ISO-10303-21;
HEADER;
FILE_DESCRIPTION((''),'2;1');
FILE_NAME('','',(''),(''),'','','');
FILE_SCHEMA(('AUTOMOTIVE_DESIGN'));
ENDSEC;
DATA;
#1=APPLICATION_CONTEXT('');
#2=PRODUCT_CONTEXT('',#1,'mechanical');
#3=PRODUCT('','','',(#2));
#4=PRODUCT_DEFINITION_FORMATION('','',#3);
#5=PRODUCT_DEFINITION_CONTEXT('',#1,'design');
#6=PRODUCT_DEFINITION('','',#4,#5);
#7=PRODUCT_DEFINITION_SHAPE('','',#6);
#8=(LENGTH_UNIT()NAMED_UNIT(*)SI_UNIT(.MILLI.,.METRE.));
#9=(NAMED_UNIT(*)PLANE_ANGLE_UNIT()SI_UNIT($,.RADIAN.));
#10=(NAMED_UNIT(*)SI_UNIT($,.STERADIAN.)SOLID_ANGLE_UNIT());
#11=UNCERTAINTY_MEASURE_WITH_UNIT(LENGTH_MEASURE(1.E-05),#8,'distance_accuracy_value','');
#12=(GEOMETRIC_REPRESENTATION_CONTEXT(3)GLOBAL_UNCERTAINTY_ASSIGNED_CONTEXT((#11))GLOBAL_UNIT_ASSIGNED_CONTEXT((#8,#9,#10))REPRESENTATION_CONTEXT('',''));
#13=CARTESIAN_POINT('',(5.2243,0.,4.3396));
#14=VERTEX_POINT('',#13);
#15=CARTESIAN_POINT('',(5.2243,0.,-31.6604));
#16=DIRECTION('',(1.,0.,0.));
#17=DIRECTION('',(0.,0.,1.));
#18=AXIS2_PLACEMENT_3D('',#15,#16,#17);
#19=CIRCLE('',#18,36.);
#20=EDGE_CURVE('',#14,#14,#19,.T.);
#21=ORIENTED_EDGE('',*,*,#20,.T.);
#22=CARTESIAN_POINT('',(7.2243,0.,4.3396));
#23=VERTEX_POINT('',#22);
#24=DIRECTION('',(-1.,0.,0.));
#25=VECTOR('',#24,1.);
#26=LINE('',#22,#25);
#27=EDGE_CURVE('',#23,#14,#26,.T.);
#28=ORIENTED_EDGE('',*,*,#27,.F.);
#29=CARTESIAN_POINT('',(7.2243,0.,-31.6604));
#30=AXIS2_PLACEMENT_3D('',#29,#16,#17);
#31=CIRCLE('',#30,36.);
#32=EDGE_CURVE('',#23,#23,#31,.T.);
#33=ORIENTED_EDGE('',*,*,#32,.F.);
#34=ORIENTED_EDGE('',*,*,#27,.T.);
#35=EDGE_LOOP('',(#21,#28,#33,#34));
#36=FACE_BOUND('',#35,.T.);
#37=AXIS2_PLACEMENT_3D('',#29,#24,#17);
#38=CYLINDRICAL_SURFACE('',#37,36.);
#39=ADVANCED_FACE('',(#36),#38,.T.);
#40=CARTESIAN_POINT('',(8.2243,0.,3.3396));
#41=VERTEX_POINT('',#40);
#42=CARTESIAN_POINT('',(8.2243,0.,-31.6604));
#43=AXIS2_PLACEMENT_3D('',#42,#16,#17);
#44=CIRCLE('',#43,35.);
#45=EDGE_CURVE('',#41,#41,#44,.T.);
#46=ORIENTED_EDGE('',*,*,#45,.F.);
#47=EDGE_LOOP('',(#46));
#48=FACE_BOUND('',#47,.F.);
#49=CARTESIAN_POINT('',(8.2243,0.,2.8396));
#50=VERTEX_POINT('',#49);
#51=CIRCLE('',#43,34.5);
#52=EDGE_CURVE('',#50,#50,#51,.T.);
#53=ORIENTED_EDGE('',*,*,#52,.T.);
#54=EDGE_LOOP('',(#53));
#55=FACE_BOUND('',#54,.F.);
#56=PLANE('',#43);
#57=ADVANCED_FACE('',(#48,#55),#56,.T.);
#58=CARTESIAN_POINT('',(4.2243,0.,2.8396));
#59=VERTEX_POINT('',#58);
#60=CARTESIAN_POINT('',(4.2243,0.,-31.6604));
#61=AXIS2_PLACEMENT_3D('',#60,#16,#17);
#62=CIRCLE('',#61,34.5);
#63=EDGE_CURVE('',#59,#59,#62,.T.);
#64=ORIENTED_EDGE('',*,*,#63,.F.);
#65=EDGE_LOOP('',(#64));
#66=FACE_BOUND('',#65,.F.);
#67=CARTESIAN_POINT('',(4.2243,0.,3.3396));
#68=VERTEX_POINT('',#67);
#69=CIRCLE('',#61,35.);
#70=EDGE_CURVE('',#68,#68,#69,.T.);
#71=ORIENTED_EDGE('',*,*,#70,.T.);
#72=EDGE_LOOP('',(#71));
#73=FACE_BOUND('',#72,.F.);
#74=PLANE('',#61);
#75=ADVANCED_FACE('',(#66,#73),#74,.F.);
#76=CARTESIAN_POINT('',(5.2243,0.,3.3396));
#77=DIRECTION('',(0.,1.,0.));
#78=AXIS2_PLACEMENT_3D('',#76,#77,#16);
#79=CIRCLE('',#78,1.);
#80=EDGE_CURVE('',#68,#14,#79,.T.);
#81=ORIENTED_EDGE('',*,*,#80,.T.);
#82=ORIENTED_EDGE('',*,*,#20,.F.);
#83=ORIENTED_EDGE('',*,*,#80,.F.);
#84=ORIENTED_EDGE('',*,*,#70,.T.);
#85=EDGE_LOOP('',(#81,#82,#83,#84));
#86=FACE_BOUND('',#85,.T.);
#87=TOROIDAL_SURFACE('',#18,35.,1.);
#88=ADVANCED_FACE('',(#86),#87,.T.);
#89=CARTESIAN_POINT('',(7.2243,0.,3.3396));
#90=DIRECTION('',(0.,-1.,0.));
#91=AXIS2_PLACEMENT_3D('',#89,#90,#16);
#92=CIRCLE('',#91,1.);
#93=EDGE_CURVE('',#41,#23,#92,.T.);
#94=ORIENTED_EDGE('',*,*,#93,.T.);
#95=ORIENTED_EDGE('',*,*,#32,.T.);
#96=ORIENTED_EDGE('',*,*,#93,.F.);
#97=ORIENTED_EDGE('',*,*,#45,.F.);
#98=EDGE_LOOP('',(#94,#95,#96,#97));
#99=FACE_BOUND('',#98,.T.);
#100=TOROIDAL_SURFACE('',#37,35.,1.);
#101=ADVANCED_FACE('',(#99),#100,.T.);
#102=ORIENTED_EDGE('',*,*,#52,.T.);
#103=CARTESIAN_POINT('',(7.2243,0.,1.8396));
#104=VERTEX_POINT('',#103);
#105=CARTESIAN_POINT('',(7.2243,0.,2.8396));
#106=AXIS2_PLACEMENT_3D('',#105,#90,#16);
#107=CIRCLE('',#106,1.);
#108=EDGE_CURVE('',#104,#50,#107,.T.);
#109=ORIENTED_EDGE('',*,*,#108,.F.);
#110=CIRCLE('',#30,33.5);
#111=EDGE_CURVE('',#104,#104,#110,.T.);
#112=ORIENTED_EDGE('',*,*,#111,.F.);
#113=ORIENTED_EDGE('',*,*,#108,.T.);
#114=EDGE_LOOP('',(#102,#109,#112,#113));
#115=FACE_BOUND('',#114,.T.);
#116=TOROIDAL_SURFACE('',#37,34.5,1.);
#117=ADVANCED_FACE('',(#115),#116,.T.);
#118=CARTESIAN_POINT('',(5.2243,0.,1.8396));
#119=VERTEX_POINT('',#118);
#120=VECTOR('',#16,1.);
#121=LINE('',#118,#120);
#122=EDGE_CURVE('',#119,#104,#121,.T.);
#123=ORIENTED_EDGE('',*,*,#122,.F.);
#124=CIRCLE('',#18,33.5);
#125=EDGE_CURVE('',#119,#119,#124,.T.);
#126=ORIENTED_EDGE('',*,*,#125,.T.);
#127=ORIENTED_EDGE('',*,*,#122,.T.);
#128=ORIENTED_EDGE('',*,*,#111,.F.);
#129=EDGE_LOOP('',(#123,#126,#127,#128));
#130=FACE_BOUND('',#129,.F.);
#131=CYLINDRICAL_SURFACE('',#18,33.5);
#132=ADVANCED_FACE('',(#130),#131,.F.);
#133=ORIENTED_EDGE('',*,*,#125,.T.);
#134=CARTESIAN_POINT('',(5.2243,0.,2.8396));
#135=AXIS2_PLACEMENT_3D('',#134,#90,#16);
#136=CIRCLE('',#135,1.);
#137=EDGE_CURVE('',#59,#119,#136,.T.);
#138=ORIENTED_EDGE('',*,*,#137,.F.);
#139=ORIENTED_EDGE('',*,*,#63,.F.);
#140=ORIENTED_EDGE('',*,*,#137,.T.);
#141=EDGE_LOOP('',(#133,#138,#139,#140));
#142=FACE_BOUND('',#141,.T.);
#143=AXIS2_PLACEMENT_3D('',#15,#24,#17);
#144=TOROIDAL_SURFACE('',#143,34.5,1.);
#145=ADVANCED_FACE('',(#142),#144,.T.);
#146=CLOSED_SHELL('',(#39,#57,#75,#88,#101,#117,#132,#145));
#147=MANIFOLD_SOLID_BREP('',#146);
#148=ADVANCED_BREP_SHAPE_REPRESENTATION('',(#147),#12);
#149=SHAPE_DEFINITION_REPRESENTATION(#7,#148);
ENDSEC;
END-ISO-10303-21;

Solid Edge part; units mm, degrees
sketch "Sketch1" plane through (0, 0, 0) normal (0, -1, 0) x (1, 0, 0)
  arc A0 (7.2243, 1.8396) -> (8.2243, 2.8396) centre (7.2243, 2.8396) ccw
  line L0 (8.2243, 2.8396) -> (8.2243, 3.3396)
  arc A1 (8.2243, 3.3396) -> (7.2243, 4.3396) centre (7.2243, 3.3396) ccw
  line L1 (7.2243, 4.3396) -> (5.2243, 4.3396)
  arc A2 (4.2243, 3.3396) -> (5.2243, 4.3396) centre (5.2243, 3.3396) cw
  line L2 (4.2243, 3.3396) -> (4.2243, 2.8396)
  arc A3 (4.2243, 2.8396) -> (5.2243, 1.8396) centre (5.2243, 2.8396) ccw
  line L3 (5.2243, 1.8396) -> (7.2243, 1.8396)
revolve "RevolvedProtrusion1" add sketch "Sketch1" angle 360 about axis through (6.2243, 0, -31.6604) along (1, 0, 0)
